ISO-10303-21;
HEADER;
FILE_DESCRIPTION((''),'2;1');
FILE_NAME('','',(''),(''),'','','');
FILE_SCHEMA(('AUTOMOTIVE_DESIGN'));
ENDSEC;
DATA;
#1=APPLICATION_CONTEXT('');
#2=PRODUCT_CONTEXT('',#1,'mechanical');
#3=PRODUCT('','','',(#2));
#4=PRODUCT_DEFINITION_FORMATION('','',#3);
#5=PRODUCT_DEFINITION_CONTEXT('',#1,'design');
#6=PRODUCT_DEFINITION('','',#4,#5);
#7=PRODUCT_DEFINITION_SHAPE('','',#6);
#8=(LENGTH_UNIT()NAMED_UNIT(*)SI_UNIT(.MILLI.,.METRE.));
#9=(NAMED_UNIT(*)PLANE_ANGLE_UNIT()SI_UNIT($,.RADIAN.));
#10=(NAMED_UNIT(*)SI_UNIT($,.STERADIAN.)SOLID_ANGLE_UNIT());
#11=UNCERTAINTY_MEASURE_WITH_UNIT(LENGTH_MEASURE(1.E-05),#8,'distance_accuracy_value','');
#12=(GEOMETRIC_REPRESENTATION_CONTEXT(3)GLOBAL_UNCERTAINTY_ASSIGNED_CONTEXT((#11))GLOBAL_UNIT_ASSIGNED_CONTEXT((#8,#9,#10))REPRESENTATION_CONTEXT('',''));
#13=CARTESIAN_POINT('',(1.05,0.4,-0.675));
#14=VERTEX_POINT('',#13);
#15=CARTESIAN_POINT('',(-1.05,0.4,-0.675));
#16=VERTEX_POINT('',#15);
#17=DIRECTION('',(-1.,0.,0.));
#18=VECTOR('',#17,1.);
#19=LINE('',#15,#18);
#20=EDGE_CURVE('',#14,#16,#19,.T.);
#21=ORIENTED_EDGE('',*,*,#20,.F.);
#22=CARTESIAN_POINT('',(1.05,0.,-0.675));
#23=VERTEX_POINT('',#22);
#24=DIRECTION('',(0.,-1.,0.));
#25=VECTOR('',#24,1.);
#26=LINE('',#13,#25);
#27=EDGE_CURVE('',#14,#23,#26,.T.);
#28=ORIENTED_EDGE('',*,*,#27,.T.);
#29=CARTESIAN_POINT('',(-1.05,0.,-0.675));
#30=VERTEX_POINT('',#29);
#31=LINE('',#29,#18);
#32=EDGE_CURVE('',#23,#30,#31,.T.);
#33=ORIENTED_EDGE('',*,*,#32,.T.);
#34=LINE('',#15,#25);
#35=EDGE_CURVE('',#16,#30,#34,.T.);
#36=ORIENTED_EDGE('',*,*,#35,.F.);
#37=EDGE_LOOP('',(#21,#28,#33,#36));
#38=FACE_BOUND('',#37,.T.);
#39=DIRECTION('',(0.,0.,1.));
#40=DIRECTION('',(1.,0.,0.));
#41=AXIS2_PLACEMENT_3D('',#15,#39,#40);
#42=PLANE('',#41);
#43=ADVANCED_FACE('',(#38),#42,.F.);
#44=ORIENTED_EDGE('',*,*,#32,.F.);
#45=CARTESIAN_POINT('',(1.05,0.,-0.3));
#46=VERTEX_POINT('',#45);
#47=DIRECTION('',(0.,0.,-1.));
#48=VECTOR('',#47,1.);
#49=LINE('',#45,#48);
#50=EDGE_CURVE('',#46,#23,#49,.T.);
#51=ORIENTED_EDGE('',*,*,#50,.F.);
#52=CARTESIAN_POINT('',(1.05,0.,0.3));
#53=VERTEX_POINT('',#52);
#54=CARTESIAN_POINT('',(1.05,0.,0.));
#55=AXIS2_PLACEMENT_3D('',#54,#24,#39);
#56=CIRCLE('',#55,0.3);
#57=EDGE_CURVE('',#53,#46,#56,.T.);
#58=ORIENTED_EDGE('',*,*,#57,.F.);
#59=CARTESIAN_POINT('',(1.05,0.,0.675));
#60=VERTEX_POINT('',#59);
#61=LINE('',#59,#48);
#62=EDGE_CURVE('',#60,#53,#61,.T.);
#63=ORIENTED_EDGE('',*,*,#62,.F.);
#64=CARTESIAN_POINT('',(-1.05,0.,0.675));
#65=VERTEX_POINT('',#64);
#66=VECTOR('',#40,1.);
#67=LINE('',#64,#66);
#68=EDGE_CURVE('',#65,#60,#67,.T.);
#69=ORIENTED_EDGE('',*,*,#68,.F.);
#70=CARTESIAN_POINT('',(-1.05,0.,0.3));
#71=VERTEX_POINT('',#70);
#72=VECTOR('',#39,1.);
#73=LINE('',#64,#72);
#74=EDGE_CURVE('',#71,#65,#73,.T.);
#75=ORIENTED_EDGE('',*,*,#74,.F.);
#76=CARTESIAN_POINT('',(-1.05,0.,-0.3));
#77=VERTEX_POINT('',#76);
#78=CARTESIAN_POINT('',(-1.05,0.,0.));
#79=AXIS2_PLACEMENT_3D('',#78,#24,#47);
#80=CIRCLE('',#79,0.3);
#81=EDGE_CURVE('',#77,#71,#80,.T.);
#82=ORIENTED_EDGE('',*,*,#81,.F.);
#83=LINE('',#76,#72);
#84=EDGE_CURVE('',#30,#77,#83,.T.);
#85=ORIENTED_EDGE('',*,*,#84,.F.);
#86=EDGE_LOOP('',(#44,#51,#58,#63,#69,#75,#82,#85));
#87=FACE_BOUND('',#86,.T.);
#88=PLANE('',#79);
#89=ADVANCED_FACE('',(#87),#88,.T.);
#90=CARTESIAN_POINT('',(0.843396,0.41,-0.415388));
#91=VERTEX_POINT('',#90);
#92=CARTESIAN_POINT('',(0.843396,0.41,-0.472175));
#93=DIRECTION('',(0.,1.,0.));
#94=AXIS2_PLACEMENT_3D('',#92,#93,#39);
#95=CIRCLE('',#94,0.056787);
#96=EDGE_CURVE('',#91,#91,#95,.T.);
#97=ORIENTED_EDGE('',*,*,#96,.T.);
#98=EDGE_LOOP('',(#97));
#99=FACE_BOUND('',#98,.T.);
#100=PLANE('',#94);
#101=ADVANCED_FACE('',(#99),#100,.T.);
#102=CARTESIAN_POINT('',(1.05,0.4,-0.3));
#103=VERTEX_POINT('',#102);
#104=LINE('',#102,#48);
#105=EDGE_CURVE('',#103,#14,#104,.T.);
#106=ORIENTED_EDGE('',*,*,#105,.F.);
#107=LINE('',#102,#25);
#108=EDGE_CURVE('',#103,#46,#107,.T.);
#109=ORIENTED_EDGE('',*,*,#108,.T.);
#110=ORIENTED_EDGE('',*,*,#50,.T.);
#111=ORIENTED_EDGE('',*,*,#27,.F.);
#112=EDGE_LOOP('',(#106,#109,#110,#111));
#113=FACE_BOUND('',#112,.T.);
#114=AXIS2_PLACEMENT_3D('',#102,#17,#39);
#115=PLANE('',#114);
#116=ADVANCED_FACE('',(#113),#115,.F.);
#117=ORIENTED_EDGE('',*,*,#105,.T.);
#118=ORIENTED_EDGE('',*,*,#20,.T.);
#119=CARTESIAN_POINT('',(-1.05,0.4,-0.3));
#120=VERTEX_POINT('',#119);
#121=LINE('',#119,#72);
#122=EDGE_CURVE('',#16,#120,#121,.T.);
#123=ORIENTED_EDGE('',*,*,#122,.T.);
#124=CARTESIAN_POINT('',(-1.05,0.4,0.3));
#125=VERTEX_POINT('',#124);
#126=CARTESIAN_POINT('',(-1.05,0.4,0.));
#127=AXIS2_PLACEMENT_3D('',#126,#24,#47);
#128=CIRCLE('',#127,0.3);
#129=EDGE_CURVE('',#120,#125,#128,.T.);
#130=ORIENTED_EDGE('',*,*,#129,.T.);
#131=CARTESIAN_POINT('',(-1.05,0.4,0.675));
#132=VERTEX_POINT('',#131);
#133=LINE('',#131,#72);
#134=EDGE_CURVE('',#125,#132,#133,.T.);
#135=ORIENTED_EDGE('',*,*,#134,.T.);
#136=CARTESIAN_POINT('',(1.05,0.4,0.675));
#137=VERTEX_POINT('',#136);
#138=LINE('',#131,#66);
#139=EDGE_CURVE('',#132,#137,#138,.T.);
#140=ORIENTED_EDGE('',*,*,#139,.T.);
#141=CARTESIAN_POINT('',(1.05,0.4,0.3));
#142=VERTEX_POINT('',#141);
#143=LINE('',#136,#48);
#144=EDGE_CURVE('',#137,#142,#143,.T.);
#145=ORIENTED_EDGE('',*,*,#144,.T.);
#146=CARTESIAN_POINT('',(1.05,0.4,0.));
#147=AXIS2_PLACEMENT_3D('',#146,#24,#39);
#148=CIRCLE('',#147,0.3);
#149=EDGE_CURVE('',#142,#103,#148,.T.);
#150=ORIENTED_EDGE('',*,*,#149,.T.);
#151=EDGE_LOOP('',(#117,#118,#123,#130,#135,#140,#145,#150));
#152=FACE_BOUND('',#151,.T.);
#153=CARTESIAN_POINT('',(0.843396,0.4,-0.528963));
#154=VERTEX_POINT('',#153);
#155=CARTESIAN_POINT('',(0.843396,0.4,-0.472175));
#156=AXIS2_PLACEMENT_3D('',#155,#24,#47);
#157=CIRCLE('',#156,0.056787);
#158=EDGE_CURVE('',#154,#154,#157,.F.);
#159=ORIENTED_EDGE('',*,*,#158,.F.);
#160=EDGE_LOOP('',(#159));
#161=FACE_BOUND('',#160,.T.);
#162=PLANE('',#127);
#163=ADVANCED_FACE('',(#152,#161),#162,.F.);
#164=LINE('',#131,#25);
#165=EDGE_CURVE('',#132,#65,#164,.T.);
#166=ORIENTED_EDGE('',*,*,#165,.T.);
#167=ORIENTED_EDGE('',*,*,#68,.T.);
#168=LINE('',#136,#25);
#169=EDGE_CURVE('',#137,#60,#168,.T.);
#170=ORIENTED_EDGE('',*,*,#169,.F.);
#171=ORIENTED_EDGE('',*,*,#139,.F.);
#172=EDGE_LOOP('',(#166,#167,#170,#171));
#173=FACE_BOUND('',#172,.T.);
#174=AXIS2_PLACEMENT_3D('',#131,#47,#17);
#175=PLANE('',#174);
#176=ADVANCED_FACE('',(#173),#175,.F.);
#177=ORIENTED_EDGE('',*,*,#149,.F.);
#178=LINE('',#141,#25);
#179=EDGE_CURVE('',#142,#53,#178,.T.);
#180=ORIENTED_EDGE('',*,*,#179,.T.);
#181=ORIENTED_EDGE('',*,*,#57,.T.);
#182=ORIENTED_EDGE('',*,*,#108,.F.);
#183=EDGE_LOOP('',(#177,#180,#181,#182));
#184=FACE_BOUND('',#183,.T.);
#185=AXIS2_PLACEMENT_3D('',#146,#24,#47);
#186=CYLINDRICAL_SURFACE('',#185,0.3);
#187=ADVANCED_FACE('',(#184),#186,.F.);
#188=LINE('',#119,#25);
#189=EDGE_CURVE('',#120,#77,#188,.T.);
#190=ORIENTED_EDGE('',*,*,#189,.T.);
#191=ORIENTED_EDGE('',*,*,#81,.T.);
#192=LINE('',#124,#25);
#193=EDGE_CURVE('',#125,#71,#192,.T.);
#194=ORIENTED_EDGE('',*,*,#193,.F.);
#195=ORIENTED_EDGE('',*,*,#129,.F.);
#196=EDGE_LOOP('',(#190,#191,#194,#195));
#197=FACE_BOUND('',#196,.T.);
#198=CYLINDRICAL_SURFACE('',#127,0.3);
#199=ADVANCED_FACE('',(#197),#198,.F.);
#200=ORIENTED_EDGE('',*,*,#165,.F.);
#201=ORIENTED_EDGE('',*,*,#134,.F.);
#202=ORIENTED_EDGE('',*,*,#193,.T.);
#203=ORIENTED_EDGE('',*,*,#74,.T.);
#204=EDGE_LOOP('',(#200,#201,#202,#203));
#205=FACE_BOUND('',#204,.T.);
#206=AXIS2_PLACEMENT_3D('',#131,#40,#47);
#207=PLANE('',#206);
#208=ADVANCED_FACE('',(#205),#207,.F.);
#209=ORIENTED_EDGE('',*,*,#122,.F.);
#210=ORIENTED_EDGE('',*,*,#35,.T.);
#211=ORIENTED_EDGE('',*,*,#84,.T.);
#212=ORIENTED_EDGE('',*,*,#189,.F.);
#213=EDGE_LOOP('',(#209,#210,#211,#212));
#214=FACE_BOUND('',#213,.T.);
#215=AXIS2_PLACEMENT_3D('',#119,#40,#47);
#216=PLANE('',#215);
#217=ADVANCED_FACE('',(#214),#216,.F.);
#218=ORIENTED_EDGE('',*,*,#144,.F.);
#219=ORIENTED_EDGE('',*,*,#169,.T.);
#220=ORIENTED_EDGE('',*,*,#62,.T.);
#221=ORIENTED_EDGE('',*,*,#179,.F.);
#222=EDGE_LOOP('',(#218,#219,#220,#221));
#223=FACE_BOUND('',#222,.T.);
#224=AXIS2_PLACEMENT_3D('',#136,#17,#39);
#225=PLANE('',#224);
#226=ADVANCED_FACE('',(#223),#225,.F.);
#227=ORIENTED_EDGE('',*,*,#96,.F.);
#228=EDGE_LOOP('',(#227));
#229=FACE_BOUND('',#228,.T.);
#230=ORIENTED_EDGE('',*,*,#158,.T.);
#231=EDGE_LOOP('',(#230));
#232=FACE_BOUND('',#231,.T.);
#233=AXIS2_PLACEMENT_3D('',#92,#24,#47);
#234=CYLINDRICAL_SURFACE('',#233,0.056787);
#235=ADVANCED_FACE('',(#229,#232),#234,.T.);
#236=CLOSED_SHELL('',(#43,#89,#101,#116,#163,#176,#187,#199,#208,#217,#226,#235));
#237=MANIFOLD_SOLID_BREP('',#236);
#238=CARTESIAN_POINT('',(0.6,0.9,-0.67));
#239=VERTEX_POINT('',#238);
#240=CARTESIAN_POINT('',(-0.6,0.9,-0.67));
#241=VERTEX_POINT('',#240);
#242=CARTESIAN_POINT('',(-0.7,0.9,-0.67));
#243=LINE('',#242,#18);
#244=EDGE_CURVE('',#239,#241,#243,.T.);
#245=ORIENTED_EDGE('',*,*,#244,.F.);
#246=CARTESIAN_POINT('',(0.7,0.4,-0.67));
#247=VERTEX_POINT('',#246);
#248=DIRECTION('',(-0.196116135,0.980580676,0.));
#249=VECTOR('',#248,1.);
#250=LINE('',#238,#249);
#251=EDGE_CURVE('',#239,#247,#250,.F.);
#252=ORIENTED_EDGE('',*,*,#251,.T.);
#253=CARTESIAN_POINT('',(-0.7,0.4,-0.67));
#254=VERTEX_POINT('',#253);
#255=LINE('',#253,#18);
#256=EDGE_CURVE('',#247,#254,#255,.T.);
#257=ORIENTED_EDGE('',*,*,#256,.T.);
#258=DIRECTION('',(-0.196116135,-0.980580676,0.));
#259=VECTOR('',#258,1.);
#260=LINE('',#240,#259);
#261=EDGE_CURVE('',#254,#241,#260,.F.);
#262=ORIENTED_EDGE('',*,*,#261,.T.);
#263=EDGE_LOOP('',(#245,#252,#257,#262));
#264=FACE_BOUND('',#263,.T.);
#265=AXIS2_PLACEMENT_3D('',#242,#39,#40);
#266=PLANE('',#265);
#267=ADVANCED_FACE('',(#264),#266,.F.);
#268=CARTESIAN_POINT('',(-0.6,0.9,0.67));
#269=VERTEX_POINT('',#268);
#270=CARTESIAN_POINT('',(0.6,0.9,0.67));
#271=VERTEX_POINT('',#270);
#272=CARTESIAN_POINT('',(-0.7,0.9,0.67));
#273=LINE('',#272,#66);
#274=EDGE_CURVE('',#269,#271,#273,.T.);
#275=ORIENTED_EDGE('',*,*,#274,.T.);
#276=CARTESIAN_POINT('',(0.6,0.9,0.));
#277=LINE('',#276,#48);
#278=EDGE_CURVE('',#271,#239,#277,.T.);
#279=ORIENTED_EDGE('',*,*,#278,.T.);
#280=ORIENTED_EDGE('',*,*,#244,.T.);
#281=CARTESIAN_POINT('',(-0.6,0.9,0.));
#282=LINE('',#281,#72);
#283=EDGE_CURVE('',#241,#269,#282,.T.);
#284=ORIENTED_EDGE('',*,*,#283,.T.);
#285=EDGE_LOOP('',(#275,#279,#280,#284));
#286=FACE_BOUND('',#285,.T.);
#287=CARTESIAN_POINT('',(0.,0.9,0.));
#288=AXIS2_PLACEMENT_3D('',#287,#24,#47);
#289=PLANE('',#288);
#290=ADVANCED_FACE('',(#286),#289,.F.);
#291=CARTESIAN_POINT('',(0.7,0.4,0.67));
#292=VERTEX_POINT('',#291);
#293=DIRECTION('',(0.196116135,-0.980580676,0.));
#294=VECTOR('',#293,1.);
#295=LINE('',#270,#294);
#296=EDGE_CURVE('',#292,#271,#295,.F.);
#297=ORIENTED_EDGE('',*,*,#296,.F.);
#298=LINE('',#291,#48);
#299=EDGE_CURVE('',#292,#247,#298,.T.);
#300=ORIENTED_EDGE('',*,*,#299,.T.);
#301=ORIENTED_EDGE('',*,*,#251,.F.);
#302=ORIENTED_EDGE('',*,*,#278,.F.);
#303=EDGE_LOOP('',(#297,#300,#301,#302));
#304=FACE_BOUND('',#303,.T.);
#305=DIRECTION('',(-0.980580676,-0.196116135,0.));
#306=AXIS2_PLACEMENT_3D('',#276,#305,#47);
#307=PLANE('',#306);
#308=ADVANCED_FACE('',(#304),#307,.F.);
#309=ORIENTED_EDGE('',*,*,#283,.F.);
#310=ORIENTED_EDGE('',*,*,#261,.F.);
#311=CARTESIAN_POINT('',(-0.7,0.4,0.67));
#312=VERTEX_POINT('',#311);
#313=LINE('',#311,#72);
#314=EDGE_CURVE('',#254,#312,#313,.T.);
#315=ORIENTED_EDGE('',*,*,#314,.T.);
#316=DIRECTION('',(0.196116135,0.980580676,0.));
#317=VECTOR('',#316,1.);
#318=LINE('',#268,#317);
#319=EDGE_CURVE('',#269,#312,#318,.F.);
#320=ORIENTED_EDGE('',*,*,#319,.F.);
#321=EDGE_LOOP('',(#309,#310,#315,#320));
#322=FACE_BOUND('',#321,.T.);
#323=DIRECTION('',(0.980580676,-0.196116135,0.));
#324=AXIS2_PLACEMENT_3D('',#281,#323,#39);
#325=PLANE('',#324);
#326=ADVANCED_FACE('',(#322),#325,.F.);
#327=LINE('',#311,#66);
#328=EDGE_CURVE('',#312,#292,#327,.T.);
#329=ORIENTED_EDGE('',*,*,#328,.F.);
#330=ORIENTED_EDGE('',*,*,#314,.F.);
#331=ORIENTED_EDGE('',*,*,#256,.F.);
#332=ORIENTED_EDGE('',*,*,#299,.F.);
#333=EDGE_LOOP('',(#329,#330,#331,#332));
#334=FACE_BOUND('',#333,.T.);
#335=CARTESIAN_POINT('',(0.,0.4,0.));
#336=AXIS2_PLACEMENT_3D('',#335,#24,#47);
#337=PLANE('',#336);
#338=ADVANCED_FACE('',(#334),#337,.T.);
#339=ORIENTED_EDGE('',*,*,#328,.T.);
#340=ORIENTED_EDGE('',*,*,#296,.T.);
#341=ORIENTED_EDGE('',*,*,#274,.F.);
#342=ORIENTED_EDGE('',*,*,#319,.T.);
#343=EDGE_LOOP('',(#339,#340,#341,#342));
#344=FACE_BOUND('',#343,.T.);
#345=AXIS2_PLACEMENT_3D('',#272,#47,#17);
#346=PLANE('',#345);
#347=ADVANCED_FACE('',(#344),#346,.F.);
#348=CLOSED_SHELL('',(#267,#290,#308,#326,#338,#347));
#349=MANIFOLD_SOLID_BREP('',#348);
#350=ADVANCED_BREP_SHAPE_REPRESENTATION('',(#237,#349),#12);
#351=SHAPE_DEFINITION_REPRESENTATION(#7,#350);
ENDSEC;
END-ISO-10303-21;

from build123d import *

# Parameters (mm, degrees)
BOSS_EXTRUDE1_DEPTH = 0.4
SKETCH2_W           = 1.4
SKETCH2_H           = 1.34
BOSS_EXTRUDE2_DEPTH = 0.5
CHAMFER1_SIZE       = 0.5
CHAMFER1_SIZE_2     = 0.1
SKETCH3_R           = 0.05678725
BOSS_EXTRUDE3_DEPTH = 0.01


with BuildPart() as part:
    # Sketch1 → Boss-Extrude1 (new body)
    with BuildSketch(Plane(origin=(0, 0, 0), x_dir=(1, 0, 0), z_dir=(0, 1, 0))):
        with BuildLine():
            Line((-1.05, -0.675), (1.05, -0.675))
            Line((1.05, -0.675), (1.05, -0.3))
            ThreePointArc((1.05, -0.3), (0.75, 0), (1.05, 0.3))
            Line((1.05, 0.3), (1.05, 0.675))
            Line((1.05, 0.675), (-1.05, 0.675))
            Line((-1.05, 0.675), (-1.05, 0.3))
            ThreePointArc((-1.05, 0.3), (-0.75, 0), (-1.05, -0.3))
            Line((-1.05, -0.3), (-1.05, -0.675))
        make_face()
    extrude(amount=BOSS_EXTRUDE1_DEPTH)

    # Sketch3 → Boss-Extrude3 (add)
    with BuildSketch(Plane(origin=(0, 0.4, 0), x_dir=(1, 0, 0), z_dir=(0, 1, 0))):
        with Locations(Location((0.843395819, 0.472175465, 0), (0, 0, 90))):
            Circle(SKETCH3_R)
    extrude(amount=BOSS_EXTRUDE3_DEPTH)


with BuildPart() as body_2:
    # Sketch2 → Boss-Extrude2 (new body)
    with BuildSketch(Plane(origin=(0, 0.4, 0), x_dir=(1, 0, 0), z_dir=(0, 1, 0))):
        Rectangle(SKETCH2_W, SKETCH2_H)
    extrude(amount=BOSS_EXTRUDE2_DEPTH)

    # Chamfer1
    # the kernel refuses this chamfer: 0.5, 0.1 mm, written as the material it takes off along each edge
    with BuildSketch(Plane(origin=(0.7, 0.9, 1.969066043), x_dir=(0.007548351224040691, -0.9999715107910818, 0), z_dir=(0, 0, -1)), Plane(origin=(-0.7, 0.9, -1.969066043), x_dir=(-0.007548351224040691, -0.9999715107910818, 0), z_dir=(0, 0, 1))) as chamfer1_piece_1:
        Polygon((CHAMFER1_SIZE * 0.999971510791, CHAMFER1_SIZE * 0.00754835122404), (-CHAMFER1_SIZE_2 * 0.00754835122404, CHAMFER1_SIZE_2 * 0.999971510791), (0, 0), align=None)
    extrude(amount=3.938132086, mode=Mode.SUBTRACT)


solid = Compound([part.part, body_2.part])
